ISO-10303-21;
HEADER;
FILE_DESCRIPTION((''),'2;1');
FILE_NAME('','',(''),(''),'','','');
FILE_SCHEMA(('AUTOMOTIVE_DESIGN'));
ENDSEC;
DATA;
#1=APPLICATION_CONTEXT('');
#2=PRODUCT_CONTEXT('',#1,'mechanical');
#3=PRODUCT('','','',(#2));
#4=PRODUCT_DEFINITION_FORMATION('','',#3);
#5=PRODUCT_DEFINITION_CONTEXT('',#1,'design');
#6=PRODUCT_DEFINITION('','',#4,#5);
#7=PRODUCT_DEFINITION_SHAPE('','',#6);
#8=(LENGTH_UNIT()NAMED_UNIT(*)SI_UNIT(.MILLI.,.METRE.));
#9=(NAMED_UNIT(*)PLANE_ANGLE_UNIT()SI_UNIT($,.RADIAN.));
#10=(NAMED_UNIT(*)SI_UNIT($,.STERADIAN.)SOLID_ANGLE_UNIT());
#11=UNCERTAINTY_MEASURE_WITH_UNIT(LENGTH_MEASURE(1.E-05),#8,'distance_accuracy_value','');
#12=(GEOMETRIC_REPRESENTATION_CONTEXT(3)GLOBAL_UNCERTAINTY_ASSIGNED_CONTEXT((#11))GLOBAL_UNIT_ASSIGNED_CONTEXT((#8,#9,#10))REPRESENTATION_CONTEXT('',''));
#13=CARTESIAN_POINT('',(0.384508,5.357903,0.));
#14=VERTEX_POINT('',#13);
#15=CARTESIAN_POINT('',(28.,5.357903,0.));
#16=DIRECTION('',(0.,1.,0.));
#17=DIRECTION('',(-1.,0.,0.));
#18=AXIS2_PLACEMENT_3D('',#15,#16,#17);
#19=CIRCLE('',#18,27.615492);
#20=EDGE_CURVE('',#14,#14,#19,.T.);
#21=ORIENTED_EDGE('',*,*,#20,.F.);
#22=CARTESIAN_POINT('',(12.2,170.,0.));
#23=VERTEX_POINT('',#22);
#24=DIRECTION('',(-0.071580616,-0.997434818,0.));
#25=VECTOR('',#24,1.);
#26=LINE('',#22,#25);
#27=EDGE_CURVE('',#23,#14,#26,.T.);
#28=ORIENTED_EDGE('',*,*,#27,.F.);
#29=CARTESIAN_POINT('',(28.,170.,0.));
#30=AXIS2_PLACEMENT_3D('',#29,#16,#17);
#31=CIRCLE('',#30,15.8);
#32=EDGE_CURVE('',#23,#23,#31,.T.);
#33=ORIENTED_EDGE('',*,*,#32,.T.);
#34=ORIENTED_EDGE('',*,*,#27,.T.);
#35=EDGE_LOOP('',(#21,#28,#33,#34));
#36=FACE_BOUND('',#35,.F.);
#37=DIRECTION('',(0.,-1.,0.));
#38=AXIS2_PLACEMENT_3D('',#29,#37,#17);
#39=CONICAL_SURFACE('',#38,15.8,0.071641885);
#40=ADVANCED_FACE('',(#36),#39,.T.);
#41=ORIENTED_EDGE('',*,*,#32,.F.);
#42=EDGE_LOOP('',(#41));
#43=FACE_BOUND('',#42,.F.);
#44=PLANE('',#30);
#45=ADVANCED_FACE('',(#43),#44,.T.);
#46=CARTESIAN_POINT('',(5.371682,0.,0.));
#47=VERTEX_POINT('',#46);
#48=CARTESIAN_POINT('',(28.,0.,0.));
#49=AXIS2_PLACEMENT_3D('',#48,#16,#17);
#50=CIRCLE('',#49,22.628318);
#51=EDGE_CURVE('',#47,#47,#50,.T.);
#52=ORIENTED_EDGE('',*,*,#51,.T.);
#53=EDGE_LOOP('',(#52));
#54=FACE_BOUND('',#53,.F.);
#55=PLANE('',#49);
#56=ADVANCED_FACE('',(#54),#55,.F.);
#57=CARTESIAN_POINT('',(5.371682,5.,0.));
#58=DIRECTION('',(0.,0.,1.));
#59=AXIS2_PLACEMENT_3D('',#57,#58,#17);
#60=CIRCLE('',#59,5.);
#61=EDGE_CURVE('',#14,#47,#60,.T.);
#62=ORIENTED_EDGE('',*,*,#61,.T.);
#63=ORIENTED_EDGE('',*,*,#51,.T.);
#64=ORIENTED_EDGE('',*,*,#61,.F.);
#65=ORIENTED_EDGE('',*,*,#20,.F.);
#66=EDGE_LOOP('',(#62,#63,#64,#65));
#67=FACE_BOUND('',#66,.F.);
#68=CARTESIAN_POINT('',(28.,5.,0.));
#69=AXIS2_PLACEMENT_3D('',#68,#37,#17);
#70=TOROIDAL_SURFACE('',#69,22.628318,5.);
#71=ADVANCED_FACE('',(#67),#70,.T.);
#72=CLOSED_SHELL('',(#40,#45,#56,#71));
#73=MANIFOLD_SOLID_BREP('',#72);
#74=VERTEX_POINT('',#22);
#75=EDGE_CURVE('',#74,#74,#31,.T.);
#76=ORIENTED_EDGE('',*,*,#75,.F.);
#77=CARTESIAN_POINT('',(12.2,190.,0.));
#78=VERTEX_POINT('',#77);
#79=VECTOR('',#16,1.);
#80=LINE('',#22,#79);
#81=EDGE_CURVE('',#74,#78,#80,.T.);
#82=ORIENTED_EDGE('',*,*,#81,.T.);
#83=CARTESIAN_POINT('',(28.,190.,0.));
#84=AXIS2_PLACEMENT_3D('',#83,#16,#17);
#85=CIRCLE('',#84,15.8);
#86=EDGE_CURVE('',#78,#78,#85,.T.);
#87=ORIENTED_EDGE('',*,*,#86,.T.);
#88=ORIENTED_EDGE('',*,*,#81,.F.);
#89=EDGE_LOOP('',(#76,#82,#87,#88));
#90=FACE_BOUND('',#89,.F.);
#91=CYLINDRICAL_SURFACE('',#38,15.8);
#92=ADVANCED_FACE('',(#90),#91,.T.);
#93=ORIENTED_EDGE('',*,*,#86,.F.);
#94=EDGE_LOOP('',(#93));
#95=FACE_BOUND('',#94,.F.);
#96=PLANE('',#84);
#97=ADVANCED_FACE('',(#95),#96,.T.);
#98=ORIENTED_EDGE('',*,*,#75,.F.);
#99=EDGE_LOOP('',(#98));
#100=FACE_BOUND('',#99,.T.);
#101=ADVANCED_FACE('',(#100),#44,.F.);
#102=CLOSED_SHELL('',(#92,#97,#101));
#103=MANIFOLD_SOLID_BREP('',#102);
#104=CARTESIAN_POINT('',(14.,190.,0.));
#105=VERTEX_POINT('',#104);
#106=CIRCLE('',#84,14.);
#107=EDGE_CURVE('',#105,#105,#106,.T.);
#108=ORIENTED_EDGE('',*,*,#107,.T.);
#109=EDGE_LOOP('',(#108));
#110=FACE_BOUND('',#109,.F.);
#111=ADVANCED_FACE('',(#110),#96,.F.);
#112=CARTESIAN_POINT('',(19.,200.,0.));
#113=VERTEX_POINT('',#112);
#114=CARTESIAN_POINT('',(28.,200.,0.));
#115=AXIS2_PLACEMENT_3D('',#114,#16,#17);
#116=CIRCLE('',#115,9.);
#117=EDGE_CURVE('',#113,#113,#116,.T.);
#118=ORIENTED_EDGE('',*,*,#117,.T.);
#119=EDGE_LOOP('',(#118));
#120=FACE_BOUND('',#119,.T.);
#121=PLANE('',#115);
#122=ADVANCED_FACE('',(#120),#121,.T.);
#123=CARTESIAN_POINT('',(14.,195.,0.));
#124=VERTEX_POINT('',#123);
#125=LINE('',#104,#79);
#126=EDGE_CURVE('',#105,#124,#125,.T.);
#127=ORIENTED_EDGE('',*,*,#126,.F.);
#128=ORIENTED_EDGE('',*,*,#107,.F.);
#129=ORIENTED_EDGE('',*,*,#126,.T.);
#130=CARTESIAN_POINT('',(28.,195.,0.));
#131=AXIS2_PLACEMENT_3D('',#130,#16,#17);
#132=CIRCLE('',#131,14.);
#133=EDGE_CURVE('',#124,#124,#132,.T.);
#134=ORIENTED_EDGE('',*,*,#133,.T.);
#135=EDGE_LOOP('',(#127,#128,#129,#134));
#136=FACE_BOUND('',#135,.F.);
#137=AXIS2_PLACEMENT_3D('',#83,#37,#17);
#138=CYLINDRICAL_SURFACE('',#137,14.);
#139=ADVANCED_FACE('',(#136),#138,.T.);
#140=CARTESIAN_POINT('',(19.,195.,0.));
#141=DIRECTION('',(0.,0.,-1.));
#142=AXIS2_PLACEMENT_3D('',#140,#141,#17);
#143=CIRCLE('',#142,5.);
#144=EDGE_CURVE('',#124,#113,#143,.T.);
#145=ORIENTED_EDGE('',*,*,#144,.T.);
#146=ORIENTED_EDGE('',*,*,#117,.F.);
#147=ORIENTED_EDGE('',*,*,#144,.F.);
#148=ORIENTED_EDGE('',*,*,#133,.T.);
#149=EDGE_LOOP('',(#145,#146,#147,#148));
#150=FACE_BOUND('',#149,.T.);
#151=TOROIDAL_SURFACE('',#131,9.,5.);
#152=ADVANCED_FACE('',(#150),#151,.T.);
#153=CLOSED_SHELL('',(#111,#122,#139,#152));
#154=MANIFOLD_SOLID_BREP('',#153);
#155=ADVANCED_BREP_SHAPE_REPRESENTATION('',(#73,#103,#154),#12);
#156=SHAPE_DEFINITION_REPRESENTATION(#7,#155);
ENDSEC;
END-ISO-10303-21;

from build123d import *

# Parameters (mm, degrees)
F2_R     = 5
F3_DEPTH = 20
F4_R     = 14
F5_DEPTH = 10
F6_R     = 5


with BuildPart() as f1:
    # F0 (on Top) → F1 (revolve)
    with BuildSketch(Plane.XY):
        Polygon((12.2, 170), (0, 0), (28, 0), (28, 170), align=None)
    revolve(axis=Axis((28, 85, 0), (0, 1, 0)))

    # F2
    f2_edges = [f1.edges().sort_by_distance(p)[0] for p in [
        (56, 0, 0),
    ]]
    fillet(f2_edges, radius=F2_R)


with BuildPart() as f3:
    # F3 (new): a face of the model
    f3_faces = [f1.part.faces().sort_by_distance(p)[0] for p in [
        (28, 170, 0),
    ]]
    extrude(f3_faces, amount=F3_DEPTH)


with BuildPart() as f5:
    # F4 (on face) → F5 (new body)
    with BuildSketch(Plane(origin=(0, 190, 0), x_dir=(-1, 0, 0), z_dir=(0, 1, 0))):
        with Locations((-28, 0)):
            Circle(F4_R)
    extrude(amount=F5_DEPTH)

    # F6
    f6_edges = [f5.edges().sort_by_distance(p)[0] for p in [
        (42, 200, 0),
    ]]
    fillet(f6_edges, radius=F6_R)


solid = Compound([f1.part, f3.part, f5.part])
